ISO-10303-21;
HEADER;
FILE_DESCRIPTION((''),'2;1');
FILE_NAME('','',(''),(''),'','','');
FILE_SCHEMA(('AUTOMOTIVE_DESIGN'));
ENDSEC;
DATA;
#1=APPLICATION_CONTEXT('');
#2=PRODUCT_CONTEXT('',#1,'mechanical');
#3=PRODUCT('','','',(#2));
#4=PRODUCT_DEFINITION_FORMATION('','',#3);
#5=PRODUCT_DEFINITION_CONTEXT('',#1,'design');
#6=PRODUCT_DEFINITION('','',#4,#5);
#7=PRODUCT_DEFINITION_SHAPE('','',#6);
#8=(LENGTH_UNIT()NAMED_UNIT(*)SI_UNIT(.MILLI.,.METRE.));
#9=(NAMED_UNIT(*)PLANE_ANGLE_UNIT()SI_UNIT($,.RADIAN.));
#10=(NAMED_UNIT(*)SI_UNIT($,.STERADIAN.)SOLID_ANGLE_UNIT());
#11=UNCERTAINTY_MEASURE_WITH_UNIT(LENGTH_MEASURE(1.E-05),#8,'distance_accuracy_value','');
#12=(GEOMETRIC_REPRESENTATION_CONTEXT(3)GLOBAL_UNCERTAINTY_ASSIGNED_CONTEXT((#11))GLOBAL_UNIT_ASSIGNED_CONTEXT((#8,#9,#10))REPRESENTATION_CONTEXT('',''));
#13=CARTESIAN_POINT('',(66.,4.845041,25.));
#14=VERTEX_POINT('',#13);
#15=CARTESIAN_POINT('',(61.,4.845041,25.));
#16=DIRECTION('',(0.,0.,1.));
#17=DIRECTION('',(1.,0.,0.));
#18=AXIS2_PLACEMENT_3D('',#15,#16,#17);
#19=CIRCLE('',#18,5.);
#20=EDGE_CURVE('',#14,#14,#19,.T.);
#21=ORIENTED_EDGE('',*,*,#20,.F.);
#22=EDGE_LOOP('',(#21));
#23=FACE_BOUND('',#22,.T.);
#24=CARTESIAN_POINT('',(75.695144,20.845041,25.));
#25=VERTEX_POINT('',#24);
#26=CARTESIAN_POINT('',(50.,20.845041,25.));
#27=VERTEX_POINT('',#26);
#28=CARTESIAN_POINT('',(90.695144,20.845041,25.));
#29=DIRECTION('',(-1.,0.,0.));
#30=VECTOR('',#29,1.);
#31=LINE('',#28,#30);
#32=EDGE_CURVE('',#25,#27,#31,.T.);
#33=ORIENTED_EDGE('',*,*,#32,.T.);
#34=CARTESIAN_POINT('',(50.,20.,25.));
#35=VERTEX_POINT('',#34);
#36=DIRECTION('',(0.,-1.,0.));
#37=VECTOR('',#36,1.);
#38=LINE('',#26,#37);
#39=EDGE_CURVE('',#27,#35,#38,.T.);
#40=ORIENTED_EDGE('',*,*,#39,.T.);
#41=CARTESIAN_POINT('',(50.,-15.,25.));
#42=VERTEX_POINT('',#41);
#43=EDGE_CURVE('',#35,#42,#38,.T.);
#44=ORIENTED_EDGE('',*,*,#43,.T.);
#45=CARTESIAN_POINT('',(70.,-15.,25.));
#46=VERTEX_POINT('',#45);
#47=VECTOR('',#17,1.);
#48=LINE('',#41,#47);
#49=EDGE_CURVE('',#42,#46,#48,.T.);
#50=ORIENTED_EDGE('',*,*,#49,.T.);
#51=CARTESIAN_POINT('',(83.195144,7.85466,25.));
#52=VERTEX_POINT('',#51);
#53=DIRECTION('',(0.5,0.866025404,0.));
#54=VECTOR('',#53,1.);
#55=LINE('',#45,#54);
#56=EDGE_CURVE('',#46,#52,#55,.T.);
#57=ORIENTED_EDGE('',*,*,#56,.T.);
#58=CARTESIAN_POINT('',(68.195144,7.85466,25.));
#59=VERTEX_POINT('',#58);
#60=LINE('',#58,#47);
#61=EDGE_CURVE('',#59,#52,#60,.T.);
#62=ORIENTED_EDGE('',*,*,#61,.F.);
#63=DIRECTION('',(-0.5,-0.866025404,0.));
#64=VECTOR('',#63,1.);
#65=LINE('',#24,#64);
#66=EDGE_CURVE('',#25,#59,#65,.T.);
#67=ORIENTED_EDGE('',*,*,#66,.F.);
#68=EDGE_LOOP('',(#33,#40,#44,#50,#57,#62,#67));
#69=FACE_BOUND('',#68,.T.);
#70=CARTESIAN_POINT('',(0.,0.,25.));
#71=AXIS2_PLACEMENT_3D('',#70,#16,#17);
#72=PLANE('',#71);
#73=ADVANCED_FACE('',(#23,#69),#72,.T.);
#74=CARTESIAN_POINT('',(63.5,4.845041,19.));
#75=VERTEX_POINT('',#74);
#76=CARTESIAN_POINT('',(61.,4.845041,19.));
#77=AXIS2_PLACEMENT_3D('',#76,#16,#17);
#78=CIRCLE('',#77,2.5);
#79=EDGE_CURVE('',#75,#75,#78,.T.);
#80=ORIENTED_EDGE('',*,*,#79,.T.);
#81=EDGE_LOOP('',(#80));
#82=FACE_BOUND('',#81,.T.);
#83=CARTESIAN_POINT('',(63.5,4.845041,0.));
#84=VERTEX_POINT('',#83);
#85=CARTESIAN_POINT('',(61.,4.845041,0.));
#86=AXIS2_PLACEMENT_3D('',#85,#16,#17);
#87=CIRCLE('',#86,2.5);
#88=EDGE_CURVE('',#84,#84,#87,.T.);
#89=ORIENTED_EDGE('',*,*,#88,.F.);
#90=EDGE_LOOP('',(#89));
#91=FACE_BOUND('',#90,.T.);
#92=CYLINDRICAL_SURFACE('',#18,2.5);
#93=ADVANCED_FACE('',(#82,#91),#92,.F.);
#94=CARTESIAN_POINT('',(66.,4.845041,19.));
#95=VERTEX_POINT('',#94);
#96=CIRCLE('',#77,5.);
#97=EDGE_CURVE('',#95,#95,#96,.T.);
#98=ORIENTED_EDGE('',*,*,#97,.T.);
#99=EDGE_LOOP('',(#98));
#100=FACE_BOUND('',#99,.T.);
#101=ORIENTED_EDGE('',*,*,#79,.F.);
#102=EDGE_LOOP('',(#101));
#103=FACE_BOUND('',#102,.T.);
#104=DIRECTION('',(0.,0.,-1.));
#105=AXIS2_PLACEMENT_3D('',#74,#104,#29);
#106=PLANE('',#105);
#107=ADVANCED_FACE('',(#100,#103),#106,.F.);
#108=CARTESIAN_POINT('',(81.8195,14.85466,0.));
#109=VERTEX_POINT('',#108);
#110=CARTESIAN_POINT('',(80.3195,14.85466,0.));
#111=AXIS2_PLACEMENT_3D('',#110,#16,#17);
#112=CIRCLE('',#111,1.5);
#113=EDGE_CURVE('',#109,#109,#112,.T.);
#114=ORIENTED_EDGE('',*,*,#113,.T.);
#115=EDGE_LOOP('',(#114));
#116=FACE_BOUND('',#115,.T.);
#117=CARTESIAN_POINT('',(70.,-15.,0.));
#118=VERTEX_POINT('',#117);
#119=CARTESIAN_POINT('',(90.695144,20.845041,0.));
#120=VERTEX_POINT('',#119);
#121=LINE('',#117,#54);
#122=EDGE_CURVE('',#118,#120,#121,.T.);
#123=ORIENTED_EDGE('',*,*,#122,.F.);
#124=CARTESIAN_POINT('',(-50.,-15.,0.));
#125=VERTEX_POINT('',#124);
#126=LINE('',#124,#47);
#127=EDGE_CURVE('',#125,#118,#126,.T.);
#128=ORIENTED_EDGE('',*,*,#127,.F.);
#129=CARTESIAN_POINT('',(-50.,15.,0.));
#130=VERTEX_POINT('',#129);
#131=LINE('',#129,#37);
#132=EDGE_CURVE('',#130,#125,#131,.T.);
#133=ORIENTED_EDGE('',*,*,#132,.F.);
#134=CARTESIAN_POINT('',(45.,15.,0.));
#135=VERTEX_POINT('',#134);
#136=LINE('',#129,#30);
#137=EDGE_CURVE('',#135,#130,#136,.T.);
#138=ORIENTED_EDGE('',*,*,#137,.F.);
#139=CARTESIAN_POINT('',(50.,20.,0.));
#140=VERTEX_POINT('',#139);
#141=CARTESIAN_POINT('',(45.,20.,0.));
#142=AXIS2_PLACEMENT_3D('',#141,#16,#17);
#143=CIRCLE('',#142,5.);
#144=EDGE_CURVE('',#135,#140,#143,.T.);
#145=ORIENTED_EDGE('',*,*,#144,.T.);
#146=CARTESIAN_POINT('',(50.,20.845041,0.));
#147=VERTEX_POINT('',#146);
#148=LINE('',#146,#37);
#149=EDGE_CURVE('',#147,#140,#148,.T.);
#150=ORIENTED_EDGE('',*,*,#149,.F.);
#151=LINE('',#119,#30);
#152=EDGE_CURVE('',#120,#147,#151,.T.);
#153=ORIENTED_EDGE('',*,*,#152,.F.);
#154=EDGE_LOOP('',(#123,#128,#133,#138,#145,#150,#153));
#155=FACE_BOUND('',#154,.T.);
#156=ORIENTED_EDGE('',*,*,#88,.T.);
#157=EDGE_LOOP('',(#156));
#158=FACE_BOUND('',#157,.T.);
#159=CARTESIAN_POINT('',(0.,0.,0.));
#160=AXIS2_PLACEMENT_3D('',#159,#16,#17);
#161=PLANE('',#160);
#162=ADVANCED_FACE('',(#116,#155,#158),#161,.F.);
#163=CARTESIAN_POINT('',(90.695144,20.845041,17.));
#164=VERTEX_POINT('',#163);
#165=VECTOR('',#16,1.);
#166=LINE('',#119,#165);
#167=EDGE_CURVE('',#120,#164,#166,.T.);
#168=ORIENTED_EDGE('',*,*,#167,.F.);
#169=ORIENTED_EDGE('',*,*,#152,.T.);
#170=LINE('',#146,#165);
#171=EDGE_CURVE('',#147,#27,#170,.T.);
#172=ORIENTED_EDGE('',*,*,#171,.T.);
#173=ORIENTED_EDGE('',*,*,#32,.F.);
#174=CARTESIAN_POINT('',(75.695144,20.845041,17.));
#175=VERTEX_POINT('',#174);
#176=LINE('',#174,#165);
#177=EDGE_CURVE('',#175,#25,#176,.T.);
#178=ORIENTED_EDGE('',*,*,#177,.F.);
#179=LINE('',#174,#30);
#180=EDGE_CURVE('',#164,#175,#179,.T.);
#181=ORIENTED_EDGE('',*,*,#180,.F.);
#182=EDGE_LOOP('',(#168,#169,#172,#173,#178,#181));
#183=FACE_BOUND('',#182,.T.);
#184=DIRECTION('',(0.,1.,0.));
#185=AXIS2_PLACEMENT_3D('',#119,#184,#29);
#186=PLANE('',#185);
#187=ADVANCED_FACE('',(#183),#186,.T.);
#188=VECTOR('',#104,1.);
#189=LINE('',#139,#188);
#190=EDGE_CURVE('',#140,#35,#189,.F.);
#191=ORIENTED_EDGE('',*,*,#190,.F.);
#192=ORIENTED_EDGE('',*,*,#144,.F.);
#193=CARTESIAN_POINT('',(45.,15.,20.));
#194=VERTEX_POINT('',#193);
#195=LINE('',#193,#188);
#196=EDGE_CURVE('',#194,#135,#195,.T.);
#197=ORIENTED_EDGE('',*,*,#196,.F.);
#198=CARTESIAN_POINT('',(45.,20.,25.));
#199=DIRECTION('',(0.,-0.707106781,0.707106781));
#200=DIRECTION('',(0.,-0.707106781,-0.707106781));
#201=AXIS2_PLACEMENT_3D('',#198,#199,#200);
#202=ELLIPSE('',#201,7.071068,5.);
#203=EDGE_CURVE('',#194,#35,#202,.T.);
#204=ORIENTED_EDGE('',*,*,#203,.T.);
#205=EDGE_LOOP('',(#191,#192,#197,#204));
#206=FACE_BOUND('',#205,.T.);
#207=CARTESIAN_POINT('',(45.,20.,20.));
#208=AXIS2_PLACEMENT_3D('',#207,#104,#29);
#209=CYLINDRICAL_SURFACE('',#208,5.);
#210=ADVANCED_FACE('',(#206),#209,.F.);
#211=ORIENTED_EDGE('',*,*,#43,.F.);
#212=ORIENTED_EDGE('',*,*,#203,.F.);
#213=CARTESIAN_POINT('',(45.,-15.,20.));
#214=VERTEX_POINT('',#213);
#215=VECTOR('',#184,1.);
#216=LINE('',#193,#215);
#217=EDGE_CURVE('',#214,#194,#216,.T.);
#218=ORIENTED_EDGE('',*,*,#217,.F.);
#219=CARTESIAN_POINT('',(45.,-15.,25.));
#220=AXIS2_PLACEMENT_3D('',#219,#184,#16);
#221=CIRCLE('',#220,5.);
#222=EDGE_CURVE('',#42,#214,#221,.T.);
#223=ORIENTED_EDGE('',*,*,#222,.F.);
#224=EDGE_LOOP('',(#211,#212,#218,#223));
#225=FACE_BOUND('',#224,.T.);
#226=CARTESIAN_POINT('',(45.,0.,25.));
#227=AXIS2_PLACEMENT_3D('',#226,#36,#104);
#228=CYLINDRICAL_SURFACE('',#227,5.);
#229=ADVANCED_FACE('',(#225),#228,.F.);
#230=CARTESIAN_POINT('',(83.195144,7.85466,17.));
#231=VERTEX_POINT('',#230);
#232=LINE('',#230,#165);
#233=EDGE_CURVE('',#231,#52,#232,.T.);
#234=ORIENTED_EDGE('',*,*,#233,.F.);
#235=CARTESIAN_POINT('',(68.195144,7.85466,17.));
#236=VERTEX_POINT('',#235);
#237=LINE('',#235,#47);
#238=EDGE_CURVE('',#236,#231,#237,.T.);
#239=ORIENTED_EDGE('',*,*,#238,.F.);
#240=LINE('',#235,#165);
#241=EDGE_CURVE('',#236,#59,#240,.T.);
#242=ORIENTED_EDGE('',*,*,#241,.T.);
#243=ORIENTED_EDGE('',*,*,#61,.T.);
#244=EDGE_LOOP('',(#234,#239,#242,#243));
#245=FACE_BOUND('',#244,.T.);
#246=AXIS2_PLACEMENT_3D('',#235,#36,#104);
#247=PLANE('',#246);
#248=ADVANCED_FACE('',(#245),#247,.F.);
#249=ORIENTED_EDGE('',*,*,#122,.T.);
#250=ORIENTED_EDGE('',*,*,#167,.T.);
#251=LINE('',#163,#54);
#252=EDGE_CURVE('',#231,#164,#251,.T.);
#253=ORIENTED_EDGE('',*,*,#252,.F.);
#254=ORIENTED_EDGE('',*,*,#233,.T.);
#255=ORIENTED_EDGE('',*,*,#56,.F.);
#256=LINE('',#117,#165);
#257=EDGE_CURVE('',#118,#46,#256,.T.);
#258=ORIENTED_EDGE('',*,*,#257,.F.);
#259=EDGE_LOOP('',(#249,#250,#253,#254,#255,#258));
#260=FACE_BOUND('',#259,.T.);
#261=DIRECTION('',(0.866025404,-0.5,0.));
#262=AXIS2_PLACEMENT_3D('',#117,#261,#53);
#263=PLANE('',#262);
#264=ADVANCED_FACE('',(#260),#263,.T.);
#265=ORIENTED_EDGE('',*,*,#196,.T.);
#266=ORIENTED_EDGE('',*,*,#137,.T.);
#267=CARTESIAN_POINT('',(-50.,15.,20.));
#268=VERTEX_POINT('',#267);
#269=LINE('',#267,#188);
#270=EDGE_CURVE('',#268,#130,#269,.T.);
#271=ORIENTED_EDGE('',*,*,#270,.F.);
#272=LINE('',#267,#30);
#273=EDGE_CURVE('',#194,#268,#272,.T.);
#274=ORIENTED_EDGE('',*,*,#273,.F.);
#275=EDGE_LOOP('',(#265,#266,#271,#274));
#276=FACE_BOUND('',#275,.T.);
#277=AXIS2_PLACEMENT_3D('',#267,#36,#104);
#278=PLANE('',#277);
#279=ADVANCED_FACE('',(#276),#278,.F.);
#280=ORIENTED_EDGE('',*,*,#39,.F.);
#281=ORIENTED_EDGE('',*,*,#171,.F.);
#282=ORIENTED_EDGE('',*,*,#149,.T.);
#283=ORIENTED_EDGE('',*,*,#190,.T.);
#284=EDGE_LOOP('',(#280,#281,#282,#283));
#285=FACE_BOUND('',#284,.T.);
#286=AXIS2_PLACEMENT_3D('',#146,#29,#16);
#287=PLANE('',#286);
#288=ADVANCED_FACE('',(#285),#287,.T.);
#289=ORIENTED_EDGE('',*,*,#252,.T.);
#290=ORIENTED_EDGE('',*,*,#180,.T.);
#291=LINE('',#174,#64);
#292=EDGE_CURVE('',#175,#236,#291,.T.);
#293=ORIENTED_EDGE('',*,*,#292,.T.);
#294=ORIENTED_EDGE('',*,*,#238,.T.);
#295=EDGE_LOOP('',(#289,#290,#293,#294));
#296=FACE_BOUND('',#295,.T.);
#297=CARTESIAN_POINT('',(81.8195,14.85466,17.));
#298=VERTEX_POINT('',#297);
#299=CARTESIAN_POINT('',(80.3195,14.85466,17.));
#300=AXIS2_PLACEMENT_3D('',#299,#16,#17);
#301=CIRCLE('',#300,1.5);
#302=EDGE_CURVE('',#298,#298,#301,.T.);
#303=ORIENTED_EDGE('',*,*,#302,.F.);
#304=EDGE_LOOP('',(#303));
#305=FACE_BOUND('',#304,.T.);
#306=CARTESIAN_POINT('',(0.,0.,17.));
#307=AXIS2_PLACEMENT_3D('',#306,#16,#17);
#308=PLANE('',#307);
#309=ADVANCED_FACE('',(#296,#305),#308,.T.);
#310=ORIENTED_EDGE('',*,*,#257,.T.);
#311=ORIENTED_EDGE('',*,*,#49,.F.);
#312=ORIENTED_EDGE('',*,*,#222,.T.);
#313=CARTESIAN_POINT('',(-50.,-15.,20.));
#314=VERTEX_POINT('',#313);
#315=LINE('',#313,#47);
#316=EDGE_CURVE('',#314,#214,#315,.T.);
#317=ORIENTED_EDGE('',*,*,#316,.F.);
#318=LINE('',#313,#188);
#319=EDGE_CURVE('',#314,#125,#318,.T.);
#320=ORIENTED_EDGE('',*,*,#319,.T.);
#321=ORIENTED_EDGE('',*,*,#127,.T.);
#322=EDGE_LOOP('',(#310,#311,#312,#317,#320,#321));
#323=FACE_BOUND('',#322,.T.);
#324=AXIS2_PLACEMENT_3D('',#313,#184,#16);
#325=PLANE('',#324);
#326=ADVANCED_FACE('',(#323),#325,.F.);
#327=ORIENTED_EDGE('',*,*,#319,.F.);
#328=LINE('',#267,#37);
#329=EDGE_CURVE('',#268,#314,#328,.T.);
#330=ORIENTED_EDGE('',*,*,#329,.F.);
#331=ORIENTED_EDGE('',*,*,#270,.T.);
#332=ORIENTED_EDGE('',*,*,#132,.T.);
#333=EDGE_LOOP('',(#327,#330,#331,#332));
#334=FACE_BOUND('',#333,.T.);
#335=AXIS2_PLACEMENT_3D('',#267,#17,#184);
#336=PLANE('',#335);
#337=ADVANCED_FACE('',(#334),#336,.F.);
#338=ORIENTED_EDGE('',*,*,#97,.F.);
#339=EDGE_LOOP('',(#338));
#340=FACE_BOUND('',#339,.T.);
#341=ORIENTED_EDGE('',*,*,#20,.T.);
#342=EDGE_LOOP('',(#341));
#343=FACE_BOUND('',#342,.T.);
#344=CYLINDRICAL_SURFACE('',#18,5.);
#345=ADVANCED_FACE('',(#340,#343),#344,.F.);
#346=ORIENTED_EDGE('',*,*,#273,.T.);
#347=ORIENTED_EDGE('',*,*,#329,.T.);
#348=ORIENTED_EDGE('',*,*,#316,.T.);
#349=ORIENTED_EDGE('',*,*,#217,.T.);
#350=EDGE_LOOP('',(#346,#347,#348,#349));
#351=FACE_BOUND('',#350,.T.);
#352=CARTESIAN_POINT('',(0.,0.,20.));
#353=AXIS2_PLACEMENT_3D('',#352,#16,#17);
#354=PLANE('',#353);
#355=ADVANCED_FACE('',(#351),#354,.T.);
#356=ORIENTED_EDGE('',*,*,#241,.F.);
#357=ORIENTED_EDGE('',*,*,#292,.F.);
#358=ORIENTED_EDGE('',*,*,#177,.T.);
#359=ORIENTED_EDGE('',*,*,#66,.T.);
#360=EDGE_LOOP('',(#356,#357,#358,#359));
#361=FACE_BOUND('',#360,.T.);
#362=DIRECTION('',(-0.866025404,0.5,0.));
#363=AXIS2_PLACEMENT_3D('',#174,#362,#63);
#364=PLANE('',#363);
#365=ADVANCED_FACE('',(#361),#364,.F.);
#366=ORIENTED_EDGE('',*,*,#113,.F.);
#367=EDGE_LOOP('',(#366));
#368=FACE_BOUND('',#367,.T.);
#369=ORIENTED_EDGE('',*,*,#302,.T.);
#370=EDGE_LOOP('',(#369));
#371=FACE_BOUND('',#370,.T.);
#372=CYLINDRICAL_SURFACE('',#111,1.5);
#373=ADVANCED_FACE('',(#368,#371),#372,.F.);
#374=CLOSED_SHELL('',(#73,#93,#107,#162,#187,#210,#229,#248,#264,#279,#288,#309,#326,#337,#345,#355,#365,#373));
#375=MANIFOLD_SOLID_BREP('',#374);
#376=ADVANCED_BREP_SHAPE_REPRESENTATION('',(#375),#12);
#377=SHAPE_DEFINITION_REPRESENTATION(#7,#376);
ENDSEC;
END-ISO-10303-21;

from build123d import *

# Parameters (mm, degrees)
SKETCH_1_W                = 100
SKETCH_1_H                = 30
EXTRUDE_1_DEPTH           = 20
EXTRUDE_2_DEPTH           = 5
EXTRUDE_2_DEPTH_BACK      = 20
FILLET_1_R                = 5
CUT_EXTRUDE_1_DEPTH       = 8
SKETCH_4_R                = 1.5
CUT_EXTRUDE_2_DEPTH       = 95.599814737
HOLE_WIZARD_1_D           = 5
HOLE_WIZARD_1_CBORE_D     = 10
HOLE_WIZARD_1_CBORE_DEPTH = 6


with BuildPart() as part:
    # 草图1 → 凸台-拉伸1 (new body)
    with BuildSketch(Plane.XY):
        Rectangle(SKETCH_1_W, SKETCH_1_H)
    extrude(amount=EXTRUDE_1_DEPTH)

    # 草图2 → 凸台-拉伸2 (add, two sides: drawn at the far end of the back side and taken through both)
    with BuildSketch(Plane.XY.offset(20).offset(-EXTRUDE_2_DEPTH_BACK)):
        Polygon((50, -15), (70, -15), (90.695144291, 20.845041382), (50, 20.845041382), align=None)
    extrude(amount=EXTRUDE_2_DEPTH + EXTRUDE_2_DEPTH_BACK)

    # 圆角1
    fillet_1_edges = [part.edges().sort_by_distance(p)[0] for p in [
        (50, 15, 10),
        (50, 0, 20),
    ]]
    fillet(fillet_1_edges, radius=FILLET_1_R - 0.0001)  # a hair under: the kernel refuses the full size

    # 草图3 → 切除-拉伸1 (cut)
    with BuildSketch(Plane.XY.offset(25)):
        Polygon((75.695144291, 20.845041382), (68.195144291, 7.854660326), (83.195144291, 7.854660326), (90.695144291, 20.845041382), align=None)
    extrude(amount=-CUT_EXTRUDE_1_DEPTH, mode=Mode.SUBTRACT)

    # 草图4 → 切除-拉伸2 (cut, through all)
    with BuildSketch(Plane.XY.offset(17)):
        with Locations((80.319499944, 14.854660326)):
            Circle(SKETCH_4_R)
    extrude(amount=-CUT_EXTRUDE_2_DEPTH, mode=Mode.SUBTRACT)

    # 孔1 (through all)
    with Locations(Plane(origin=(61, 4.845041382, 25), x_dir=(1, 0, 0), z_dir=(0, 0, 1))):
        with Locations((0, 0)):
            CounterBoreHole(HOLE_WIZARD_1_D / 2, HOLE_WIZARD_1_CBORE_D / 2, HOLE_WIZARD_1_CBORE_DEPTH)


solid = part.part
